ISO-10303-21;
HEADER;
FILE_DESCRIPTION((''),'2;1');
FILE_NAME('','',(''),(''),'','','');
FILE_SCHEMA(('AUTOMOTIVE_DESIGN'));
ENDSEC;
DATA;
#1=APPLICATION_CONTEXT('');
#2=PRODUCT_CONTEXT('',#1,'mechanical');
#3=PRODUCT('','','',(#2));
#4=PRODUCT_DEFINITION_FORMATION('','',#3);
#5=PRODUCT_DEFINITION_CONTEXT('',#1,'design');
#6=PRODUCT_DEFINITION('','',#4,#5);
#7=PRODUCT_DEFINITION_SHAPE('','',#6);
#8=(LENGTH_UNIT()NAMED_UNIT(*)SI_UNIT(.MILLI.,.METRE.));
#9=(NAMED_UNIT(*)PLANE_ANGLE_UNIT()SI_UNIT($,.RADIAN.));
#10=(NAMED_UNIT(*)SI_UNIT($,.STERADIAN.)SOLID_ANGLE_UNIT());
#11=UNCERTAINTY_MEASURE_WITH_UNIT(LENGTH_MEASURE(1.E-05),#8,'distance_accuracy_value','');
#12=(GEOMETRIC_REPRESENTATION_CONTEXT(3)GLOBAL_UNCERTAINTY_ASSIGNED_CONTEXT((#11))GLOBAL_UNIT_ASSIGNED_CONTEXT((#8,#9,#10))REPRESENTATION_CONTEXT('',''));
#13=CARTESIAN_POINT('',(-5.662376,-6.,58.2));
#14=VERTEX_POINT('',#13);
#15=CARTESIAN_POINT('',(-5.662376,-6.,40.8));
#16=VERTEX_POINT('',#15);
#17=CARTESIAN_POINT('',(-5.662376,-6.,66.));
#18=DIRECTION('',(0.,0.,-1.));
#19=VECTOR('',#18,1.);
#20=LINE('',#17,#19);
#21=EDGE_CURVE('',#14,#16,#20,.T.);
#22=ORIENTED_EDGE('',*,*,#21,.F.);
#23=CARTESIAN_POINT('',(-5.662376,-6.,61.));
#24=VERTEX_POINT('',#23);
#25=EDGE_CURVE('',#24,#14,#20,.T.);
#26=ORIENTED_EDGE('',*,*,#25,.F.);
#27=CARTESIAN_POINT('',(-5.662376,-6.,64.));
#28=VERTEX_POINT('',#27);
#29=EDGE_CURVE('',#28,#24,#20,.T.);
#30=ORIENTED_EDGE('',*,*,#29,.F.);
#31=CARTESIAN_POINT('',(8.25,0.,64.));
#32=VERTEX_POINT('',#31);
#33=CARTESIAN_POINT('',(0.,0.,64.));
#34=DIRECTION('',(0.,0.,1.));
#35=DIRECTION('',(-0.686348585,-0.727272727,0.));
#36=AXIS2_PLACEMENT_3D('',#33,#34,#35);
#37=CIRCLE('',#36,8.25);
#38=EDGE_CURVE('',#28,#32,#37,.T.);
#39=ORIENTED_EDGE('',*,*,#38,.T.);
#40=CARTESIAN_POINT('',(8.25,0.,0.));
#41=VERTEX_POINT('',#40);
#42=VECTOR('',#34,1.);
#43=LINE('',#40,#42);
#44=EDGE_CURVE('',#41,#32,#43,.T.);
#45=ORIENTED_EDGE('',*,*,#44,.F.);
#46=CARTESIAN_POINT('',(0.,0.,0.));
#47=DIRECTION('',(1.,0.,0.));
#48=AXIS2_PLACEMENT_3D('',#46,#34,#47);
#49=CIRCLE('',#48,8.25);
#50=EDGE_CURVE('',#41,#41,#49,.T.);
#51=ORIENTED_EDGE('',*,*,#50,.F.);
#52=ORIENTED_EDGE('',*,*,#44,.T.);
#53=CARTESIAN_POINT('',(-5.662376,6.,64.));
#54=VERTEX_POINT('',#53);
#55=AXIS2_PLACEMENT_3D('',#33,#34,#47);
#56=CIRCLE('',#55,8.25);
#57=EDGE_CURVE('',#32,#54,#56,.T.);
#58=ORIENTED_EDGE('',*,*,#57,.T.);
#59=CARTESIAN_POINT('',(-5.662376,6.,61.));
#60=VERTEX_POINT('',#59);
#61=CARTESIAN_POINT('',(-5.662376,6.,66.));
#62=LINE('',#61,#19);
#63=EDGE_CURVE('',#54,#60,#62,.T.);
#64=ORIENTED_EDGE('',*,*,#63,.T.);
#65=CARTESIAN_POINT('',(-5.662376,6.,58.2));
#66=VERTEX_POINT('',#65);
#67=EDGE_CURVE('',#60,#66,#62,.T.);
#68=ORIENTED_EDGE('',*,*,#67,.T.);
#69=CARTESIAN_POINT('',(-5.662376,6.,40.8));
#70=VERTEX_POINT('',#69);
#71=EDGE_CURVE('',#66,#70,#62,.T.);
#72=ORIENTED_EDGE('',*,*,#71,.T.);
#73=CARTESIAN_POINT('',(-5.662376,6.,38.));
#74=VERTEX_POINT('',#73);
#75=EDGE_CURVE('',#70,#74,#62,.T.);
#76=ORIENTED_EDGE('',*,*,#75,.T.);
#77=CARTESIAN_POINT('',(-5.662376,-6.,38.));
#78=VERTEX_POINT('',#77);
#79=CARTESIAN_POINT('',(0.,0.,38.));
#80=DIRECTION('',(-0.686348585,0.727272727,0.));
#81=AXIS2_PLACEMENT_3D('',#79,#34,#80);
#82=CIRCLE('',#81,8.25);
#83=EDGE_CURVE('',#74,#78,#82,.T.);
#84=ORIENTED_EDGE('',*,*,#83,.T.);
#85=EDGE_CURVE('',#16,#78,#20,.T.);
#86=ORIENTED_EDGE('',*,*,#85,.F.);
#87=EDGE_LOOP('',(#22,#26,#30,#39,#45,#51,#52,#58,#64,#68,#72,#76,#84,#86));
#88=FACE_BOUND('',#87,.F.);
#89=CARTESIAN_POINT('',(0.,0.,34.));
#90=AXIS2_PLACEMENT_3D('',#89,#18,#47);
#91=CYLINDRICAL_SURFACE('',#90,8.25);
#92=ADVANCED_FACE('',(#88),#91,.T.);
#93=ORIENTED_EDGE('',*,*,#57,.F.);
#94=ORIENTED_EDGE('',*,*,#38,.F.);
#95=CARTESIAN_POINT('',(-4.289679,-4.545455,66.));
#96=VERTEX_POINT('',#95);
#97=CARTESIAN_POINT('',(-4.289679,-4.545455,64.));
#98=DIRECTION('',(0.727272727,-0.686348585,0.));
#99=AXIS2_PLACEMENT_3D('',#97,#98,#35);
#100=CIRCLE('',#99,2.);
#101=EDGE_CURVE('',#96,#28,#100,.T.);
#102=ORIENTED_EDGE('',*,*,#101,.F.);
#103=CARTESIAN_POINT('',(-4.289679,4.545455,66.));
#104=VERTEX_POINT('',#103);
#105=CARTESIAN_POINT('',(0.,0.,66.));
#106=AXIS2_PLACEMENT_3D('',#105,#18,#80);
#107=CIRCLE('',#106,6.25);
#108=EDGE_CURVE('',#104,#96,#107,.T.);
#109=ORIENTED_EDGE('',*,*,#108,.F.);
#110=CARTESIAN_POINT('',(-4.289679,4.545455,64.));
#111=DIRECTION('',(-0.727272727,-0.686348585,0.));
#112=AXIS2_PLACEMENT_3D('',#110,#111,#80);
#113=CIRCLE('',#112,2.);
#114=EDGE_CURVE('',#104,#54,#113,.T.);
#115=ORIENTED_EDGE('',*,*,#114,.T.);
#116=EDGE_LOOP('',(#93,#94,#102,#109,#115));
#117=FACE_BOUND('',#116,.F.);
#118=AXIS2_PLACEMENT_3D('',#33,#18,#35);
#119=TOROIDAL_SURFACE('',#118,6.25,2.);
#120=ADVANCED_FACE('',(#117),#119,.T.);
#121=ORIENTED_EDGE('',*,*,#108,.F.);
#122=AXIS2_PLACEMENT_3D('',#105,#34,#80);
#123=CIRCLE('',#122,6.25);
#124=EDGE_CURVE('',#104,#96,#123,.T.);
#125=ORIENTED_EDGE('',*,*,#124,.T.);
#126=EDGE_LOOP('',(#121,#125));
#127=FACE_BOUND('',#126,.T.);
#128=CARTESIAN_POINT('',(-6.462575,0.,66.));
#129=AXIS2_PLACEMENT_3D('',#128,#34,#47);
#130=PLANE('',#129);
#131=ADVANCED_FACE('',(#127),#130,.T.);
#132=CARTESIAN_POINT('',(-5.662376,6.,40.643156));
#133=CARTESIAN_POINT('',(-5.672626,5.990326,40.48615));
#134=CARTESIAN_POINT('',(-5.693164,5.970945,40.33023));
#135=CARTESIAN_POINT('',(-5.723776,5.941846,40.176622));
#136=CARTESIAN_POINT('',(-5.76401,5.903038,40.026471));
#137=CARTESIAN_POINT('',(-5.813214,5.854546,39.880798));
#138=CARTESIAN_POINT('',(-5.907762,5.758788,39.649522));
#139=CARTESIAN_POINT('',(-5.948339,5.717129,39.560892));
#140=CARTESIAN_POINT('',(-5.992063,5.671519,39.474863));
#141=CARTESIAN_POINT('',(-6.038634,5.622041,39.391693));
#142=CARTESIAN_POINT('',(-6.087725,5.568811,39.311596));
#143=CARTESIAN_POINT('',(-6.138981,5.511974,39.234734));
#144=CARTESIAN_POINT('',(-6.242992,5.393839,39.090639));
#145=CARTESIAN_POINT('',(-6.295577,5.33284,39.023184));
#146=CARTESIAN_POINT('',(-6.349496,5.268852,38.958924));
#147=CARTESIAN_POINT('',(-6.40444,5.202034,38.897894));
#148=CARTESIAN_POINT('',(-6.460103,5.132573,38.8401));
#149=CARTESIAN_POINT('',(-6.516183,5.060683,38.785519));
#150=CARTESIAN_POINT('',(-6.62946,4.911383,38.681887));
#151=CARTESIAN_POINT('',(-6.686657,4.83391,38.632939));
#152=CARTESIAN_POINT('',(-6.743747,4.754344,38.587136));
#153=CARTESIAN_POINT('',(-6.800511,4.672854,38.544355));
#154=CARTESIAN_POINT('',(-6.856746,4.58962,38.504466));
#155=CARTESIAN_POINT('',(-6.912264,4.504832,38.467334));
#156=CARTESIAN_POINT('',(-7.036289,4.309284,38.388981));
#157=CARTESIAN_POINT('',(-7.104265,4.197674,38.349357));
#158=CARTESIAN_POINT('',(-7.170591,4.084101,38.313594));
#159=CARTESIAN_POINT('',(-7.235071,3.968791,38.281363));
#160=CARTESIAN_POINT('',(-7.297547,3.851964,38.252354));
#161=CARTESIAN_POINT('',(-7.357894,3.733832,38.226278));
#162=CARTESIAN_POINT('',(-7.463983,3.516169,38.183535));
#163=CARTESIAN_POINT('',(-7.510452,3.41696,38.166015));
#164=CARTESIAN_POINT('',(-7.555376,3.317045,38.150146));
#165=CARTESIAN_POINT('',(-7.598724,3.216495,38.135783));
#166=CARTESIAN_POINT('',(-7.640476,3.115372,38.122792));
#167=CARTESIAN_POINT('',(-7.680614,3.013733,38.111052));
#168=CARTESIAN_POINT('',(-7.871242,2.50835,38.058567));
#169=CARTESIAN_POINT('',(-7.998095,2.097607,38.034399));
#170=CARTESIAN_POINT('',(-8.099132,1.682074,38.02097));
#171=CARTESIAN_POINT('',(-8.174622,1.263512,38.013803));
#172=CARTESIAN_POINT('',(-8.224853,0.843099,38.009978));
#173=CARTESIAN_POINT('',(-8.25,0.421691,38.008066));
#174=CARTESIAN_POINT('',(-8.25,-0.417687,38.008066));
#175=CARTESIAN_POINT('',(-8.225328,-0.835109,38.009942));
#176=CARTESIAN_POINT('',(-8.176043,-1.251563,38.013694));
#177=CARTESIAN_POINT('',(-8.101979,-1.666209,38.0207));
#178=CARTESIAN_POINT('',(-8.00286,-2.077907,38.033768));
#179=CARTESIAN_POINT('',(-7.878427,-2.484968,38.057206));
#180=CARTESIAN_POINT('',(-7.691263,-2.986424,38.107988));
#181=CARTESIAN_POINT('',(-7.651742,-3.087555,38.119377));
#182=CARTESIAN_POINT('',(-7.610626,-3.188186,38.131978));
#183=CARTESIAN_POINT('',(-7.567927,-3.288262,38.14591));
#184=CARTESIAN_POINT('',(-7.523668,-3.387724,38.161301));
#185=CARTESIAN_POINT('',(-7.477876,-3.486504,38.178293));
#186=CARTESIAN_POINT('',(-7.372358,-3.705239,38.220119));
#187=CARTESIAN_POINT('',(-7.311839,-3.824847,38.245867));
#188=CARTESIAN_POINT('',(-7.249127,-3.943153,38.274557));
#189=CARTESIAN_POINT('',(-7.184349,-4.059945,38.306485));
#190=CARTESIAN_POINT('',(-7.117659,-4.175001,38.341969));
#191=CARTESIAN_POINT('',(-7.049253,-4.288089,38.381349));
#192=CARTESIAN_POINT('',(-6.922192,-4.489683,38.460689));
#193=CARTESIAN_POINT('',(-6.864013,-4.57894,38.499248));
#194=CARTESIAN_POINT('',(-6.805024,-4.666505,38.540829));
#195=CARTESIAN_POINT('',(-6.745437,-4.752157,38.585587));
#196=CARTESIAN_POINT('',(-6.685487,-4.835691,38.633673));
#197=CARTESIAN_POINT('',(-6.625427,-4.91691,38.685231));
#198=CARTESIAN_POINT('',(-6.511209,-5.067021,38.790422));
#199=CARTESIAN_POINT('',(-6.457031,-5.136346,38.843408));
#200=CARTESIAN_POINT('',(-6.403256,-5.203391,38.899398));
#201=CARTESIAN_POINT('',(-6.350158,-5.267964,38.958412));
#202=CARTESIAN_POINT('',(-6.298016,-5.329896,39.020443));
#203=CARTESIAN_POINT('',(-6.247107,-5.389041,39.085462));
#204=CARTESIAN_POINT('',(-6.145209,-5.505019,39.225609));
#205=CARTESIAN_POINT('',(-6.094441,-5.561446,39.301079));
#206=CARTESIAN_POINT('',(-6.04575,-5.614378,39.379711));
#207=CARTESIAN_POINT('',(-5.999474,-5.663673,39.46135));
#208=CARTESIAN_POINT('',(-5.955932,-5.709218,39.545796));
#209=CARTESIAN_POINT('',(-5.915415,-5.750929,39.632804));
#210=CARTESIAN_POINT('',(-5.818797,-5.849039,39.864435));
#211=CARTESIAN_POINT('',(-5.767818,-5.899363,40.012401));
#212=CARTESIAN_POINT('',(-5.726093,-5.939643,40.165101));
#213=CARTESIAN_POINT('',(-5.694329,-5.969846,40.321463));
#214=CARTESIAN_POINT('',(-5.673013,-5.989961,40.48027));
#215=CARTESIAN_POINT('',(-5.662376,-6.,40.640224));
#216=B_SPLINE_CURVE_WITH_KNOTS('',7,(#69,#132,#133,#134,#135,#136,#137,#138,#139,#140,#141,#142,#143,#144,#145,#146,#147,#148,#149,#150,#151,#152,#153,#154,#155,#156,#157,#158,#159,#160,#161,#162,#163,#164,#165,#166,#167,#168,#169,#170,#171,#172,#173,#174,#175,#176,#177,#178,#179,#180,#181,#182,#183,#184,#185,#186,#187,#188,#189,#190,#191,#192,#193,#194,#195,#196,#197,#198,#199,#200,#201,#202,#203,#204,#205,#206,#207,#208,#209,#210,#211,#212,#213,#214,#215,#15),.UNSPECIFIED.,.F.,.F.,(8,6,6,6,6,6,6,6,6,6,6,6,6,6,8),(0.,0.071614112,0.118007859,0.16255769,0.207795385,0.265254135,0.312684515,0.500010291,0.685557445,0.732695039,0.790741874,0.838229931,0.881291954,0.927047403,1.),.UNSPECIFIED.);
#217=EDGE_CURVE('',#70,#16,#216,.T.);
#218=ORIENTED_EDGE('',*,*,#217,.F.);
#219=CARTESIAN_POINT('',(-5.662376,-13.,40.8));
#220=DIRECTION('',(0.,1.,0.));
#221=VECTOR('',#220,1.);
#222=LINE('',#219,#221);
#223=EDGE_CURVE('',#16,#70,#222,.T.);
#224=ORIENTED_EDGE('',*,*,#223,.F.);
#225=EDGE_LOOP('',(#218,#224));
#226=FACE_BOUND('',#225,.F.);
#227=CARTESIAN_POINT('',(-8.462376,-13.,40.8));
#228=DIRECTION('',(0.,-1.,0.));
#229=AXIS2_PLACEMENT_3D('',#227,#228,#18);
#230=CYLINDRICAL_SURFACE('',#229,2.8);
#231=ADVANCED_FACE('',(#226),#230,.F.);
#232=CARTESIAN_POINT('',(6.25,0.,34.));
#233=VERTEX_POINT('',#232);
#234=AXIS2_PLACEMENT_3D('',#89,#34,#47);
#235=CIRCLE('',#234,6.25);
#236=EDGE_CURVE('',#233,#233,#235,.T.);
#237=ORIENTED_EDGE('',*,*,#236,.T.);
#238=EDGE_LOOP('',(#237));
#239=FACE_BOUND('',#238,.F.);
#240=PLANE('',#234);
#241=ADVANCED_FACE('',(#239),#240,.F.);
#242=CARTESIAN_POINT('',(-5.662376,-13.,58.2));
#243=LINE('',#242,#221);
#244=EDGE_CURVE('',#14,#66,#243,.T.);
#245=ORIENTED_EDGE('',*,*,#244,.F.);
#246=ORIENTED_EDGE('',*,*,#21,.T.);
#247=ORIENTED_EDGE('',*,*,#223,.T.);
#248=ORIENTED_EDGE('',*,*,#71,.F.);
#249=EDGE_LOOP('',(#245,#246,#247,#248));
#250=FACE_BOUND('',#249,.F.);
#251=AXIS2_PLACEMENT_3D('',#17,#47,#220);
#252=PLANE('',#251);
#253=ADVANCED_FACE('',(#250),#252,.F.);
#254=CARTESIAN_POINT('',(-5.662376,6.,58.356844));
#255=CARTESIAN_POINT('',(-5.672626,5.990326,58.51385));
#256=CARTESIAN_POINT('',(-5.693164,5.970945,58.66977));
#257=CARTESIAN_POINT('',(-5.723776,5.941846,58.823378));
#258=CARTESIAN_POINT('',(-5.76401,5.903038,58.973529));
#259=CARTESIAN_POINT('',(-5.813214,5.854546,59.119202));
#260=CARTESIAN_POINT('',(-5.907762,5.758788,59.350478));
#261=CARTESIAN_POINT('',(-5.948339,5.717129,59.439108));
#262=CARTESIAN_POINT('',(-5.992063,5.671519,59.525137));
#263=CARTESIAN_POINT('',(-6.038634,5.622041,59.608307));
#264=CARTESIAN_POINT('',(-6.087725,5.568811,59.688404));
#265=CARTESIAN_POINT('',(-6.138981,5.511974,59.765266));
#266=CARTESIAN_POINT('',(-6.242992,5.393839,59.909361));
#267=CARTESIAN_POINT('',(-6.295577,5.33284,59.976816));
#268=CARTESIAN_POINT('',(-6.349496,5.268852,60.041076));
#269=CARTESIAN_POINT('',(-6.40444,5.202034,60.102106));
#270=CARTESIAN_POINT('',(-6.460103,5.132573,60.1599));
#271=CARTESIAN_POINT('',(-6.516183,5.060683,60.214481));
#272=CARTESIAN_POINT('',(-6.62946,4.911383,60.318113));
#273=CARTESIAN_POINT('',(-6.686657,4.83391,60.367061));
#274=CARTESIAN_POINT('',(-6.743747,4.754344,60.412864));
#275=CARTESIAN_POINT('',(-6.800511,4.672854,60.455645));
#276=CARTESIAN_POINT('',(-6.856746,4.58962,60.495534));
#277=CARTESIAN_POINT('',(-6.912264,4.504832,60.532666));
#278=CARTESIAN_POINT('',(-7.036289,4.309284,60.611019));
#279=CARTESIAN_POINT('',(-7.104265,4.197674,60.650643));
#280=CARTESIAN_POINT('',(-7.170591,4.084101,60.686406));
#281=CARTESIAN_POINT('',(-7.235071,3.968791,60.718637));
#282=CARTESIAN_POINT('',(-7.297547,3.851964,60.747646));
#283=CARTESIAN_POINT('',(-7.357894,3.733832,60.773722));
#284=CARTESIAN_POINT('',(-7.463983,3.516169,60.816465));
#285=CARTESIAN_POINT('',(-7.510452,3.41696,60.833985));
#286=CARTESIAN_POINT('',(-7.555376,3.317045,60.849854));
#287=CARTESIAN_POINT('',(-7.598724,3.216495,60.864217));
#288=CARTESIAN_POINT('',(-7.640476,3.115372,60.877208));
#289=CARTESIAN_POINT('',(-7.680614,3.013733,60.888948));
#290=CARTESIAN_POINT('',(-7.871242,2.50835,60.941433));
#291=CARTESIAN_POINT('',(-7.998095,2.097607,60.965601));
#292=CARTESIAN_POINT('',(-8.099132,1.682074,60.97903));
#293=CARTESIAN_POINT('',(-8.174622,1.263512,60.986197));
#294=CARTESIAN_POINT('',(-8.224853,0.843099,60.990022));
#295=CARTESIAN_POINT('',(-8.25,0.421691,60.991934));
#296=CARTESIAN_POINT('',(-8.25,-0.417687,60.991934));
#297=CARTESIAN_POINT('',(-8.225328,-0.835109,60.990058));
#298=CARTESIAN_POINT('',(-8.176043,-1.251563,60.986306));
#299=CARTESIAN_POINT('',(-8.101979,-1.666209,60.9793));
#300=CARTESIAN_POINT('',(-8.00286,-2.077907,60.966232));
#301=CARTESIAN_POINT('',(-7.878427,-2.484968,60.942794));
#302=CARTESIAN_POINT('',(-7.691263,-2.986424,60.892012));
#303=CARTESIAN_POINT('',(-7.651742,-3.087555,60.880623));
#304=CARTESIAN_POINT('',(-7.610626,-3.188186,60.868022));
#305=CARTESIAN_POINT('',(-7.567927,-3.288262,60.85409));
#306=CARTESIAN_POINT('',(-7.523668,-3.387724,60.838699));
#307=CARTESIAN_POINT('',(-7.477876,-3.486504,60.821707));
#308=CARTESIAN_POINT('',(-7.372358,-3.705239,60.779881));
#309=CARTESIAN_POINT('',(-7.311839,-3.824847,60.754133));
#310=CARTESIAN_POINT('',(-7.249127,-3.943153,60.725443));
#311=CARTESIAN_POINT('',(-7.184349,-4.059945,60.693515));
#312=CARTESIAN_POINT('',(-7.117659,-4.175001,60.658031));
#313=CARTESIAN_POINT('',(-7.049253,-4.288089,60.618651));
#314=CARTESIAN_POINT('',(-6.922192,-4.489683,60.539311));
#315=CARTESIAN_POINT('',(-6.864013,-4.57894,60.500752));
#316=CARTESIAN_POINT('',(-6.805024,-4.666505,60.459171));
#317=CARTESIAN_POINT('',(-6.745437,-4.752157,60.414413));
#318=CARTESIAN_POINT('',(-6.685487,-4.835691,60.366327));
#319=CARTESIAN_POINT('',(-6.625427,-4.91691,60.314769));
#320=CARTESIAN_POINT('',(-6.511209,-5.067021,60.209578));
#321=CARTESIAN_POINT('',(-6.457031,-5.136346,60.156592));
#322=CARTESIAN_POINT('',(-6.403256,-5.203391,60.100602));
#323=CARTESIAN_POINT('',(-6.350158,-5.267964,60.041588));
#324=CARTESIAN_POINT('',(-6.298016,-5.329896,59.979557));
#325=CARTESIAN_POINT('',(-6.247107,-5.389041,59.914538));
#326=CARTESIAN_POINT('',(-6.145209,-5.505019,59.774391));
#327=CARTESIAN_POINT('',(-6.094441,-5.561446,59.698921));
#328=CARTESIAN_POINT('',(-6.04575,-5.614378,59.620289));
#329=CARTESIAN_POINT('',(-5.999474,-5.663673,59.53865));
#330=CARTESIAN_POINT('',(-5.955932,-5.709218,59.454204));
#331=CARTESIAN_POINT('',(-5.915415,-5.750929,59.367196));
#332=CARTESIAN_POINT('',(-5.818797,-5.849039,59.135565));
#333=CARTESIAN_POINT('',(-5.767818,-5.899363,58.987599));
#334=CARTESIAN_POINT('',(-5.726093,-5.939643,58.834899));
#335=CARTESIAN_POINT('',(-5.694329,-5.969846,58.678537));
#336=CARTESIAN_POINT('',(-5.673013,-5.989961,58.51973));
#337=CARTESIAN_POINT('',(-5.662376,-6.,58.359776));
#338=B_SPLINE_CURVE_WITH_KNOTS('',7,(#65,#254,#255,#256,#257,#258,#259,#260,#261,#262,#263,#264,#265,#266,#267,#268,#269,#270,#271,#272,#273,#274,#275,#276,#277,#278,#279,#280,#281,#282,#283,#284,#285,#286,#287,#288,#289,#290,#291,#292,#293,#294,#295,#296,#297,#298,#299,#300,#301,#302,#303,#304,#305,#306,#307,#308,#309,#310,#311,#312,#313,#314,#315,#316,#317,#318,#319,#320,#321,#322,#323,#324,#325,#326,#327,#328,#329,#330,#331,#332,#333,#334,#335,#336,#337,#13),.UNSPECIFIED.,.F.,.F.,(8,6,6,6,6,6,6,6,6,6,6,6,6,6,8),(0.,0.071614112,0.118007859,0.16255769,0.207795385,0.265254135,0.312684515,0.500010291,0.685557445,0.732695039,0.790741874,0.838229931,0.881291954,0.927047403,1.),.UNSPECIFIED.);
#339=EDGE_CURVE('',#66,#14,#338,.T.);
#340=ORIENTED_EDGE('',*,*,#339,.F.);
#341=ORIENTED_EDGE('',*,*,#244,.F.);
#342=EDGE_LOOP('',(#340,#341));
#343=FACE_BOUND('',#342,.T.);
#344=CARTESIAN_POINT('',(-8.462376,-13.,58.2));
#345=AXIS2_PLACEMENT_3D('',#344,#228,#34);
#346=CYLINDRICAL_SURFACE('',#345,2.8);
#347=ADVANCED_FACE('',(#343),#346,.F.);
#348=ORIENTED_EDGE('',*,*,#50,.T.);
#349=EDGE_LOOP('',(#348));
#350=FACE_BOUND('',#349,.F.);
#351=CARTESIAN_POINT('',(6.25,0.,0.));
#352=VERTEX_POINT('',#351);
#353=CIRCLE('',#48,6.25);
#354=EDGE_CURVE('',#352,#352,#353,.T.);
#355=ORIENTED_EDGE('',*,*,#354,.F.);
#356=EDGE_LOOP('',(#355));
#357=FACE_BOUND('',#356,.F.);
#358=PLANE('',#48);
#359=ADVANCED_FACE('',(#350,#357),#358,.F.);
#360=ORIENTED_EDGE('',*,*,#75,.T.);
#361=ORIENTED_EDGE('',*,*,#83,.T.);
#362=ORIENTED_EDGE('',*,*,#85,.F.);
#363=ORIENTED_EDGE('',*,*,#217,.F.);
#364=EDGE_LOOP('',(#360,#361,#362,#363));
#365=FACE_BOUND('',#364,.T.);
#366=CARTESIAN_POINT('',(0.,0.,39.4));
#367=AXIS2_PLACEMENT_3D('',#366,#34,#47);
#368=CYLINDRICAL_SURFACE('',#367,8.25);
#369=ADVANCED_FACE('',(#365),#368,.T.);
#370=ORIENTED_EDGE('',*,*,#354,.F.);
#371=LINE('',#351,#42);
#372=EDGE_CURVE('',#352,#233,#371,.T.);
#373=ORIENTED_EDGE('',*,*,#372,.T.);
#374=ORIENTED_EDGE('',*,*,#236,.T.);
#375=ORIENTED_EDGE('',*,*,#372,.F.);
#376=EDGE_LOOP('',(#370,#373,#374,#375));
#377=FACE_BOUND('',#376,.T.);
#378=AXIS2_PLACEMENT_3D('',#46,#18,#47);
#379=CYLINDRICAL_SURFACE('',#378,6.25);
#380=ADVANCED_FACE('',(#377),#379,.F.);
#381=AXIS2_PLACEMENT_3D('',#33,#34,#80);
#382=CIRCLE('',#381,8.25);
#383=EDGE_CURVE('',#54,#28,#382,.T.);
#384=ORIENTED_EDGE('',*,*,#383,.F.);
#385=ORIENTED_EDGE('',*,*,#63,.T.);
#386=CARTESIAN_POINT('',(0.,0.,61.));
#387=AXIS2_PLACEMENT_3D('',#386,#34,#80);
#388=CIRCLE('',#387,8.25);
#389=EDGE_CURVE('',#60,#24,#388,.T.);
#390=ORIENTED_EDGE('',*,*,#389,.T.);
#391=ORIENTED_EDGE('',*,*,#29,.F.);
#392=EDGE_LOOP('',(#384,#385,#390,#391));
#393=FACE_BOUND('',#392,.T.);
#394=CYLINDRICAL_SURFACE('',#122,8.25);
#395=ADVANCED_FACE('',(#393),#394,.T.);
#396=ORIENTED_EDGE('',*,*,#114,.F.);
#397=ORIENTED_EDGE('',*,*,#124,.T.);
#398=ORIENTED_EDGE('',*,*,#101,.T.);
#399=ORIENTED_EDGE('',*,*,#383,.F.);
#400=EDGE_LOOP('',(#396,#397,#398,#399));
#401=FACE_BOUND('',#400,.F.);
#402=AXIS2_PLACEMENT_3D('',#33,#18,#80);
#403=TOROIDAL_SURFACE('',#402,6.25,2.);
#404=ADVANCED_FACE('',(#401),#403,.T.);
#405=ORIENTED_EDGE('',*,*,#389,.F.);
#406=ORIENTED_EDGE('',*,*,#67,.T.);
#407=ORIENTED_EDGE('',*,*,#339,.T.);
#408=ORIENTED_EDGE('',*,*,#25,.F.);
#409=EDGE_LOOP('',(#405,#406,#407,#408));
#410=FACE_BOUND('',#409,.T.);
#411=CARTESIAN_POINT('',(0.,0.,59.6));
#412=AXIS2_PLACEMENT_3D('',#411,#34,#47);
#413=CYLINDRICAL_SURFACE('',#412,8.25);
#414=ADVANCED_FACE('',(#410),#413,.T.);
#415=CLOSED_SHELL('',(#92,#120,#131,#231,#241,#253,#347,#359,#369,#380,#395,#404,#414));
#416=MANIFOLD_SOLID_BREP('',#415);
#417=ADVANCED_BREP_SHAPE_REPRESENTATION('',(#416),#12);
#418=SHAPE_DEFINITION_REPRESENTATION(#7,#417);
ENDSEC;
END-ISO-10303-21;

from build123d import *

# Parameters (mm, degrees)
F0_R         = 8.25
F0_R_2       = 6.25
F1_DEPTH     = 34
F2_R         = 8.25
F3_DEPTH     = 32
F5_DEPTH     = 28
F6_DEPTH     = 5
F7_T4_DEPTH  = 26
F7_S5_R      = 8.25
F7_T6_DEPTH  = 15
F7_T10_DEPTH = 26
F7_S11_R     = 8.25
F7_T12_DEPTH = 15
F8_R         = 2


# Not quite as in the source:
# - a fillet or chamfer that OpenCascade refuses, or shapes differently, is made with other operations: its cross-section is extruded or revolved along the edge and cut away or added


with BuildPart() as f1:
    # F0 (on Top) → F1 (new body)
    with BuildSketch(Plane.XY):
        Circle(F0_R)
        Circle(F0_R_2, mode=Mode.SUBTRACT)
    extrude(amount=F1_DEPTH)

    # F2 (on face) → F3 (join)
    with BuildSketch(Plane.XY.offset(34)):
        Circle(F2_R)
    extrude(amount=F3_DEPTH)

    # F4 (on face) → F5 (cut)
    with BuildSketch(Plane.XY.offset(66)):
        with BuildLine():
            Line((-5.6623758265, -6), (-5.6623758265, 6))
            ThreePointArc((-5.6623758265, 6), (-8.25, 0), (-5.6623758265, -6))
        make_face()
    extrude(amount=-F5_DEPTH, mode=Mode.SUBTRACT)

    # F4 (on face) → F6 (join)
    with BuildSketch(Plane.XY.offset(66)):
        with BuildLine():
            Line((-5.6623758265, -6), (-5.6623758265, 6))
            ThreePointArc((-5.6623758265, 6), (-8.25, 0), (-5.6623758265, -6))
        make_face()
    extrude(amount=-F6_DEPTH)

    # F7: fillet of radius 2.8 on 2 edges, made by hand


with BuildPart() as f7_tool2:
    # F7_s3 → F7_t4 (new body)
    with BuildSketch(Plane.XZ.offset(13)):
        with BuildLine():
            ThreePointArc((-8.4623758265, 61), (-6.4824768391, 60.1798989873), (-5.6623758265, 58.2))
            Line((-5.6623758265, 58.2), (-5.6623758265, 61))
            Line((-5.6623758265, 61), (-8.4623758265, 61))
        make_face()
    extrude(amount=-F7_T4_DEPTH)

    # F7_s5 → F7_t6 (intersect, symmetric)
    with BuildSketch(Plane.XY.offset(59.6)):
        Circle(F7_S5_R)
    extrude(amount=F7_T6_DEPTH, both=True, mode=Mode.INTERSECT)


with BuildPart() as f1_1:
    add(f1.part)

    # F7_t1: union F7_tool2
    add(f7_tool2.part)


with BuildPart() as f7_tool8:
    # F7_s9 → F7_t10 (new body)
    with BuildSketch(Plane.XZ.offset(13)):
        with BuildLine():
            ThreePointArc((-8.4623758265, 38), (-6.4824768391, 38.8201010127), (-5.6623758265, 40.8))
            Line((-5.6623758265, 40.8), (-5.6623758265, 38))
            Line((-5.6623758265, 38), (-8.4623758265, 38))
        make_face()
    extrude(amount=-F7_T10_DEPTH)

    # F7_s11 → F7_t12 (intersect, symmetric)
    with BuildSketch(Plane.XY.offset(39.4)):
        Circle(F7_S11_R)
    extrude(amount=F7_T12_DEPTH, both=True, mode=Mode.INTERSECT)


with BuildPart() as f1_2:
    add(f1_1.part)

    # F7_t7: union F7_tool8
    add(f7_tool8.part)

    # F8
    f8_edges = [f1_2.edges().sort_by_distance(p)[0] for p in [
        (-8.25, 0, 66),
    ]]
    fillet(f8_edges, radius=F8_R)


solid = f1_2.part
